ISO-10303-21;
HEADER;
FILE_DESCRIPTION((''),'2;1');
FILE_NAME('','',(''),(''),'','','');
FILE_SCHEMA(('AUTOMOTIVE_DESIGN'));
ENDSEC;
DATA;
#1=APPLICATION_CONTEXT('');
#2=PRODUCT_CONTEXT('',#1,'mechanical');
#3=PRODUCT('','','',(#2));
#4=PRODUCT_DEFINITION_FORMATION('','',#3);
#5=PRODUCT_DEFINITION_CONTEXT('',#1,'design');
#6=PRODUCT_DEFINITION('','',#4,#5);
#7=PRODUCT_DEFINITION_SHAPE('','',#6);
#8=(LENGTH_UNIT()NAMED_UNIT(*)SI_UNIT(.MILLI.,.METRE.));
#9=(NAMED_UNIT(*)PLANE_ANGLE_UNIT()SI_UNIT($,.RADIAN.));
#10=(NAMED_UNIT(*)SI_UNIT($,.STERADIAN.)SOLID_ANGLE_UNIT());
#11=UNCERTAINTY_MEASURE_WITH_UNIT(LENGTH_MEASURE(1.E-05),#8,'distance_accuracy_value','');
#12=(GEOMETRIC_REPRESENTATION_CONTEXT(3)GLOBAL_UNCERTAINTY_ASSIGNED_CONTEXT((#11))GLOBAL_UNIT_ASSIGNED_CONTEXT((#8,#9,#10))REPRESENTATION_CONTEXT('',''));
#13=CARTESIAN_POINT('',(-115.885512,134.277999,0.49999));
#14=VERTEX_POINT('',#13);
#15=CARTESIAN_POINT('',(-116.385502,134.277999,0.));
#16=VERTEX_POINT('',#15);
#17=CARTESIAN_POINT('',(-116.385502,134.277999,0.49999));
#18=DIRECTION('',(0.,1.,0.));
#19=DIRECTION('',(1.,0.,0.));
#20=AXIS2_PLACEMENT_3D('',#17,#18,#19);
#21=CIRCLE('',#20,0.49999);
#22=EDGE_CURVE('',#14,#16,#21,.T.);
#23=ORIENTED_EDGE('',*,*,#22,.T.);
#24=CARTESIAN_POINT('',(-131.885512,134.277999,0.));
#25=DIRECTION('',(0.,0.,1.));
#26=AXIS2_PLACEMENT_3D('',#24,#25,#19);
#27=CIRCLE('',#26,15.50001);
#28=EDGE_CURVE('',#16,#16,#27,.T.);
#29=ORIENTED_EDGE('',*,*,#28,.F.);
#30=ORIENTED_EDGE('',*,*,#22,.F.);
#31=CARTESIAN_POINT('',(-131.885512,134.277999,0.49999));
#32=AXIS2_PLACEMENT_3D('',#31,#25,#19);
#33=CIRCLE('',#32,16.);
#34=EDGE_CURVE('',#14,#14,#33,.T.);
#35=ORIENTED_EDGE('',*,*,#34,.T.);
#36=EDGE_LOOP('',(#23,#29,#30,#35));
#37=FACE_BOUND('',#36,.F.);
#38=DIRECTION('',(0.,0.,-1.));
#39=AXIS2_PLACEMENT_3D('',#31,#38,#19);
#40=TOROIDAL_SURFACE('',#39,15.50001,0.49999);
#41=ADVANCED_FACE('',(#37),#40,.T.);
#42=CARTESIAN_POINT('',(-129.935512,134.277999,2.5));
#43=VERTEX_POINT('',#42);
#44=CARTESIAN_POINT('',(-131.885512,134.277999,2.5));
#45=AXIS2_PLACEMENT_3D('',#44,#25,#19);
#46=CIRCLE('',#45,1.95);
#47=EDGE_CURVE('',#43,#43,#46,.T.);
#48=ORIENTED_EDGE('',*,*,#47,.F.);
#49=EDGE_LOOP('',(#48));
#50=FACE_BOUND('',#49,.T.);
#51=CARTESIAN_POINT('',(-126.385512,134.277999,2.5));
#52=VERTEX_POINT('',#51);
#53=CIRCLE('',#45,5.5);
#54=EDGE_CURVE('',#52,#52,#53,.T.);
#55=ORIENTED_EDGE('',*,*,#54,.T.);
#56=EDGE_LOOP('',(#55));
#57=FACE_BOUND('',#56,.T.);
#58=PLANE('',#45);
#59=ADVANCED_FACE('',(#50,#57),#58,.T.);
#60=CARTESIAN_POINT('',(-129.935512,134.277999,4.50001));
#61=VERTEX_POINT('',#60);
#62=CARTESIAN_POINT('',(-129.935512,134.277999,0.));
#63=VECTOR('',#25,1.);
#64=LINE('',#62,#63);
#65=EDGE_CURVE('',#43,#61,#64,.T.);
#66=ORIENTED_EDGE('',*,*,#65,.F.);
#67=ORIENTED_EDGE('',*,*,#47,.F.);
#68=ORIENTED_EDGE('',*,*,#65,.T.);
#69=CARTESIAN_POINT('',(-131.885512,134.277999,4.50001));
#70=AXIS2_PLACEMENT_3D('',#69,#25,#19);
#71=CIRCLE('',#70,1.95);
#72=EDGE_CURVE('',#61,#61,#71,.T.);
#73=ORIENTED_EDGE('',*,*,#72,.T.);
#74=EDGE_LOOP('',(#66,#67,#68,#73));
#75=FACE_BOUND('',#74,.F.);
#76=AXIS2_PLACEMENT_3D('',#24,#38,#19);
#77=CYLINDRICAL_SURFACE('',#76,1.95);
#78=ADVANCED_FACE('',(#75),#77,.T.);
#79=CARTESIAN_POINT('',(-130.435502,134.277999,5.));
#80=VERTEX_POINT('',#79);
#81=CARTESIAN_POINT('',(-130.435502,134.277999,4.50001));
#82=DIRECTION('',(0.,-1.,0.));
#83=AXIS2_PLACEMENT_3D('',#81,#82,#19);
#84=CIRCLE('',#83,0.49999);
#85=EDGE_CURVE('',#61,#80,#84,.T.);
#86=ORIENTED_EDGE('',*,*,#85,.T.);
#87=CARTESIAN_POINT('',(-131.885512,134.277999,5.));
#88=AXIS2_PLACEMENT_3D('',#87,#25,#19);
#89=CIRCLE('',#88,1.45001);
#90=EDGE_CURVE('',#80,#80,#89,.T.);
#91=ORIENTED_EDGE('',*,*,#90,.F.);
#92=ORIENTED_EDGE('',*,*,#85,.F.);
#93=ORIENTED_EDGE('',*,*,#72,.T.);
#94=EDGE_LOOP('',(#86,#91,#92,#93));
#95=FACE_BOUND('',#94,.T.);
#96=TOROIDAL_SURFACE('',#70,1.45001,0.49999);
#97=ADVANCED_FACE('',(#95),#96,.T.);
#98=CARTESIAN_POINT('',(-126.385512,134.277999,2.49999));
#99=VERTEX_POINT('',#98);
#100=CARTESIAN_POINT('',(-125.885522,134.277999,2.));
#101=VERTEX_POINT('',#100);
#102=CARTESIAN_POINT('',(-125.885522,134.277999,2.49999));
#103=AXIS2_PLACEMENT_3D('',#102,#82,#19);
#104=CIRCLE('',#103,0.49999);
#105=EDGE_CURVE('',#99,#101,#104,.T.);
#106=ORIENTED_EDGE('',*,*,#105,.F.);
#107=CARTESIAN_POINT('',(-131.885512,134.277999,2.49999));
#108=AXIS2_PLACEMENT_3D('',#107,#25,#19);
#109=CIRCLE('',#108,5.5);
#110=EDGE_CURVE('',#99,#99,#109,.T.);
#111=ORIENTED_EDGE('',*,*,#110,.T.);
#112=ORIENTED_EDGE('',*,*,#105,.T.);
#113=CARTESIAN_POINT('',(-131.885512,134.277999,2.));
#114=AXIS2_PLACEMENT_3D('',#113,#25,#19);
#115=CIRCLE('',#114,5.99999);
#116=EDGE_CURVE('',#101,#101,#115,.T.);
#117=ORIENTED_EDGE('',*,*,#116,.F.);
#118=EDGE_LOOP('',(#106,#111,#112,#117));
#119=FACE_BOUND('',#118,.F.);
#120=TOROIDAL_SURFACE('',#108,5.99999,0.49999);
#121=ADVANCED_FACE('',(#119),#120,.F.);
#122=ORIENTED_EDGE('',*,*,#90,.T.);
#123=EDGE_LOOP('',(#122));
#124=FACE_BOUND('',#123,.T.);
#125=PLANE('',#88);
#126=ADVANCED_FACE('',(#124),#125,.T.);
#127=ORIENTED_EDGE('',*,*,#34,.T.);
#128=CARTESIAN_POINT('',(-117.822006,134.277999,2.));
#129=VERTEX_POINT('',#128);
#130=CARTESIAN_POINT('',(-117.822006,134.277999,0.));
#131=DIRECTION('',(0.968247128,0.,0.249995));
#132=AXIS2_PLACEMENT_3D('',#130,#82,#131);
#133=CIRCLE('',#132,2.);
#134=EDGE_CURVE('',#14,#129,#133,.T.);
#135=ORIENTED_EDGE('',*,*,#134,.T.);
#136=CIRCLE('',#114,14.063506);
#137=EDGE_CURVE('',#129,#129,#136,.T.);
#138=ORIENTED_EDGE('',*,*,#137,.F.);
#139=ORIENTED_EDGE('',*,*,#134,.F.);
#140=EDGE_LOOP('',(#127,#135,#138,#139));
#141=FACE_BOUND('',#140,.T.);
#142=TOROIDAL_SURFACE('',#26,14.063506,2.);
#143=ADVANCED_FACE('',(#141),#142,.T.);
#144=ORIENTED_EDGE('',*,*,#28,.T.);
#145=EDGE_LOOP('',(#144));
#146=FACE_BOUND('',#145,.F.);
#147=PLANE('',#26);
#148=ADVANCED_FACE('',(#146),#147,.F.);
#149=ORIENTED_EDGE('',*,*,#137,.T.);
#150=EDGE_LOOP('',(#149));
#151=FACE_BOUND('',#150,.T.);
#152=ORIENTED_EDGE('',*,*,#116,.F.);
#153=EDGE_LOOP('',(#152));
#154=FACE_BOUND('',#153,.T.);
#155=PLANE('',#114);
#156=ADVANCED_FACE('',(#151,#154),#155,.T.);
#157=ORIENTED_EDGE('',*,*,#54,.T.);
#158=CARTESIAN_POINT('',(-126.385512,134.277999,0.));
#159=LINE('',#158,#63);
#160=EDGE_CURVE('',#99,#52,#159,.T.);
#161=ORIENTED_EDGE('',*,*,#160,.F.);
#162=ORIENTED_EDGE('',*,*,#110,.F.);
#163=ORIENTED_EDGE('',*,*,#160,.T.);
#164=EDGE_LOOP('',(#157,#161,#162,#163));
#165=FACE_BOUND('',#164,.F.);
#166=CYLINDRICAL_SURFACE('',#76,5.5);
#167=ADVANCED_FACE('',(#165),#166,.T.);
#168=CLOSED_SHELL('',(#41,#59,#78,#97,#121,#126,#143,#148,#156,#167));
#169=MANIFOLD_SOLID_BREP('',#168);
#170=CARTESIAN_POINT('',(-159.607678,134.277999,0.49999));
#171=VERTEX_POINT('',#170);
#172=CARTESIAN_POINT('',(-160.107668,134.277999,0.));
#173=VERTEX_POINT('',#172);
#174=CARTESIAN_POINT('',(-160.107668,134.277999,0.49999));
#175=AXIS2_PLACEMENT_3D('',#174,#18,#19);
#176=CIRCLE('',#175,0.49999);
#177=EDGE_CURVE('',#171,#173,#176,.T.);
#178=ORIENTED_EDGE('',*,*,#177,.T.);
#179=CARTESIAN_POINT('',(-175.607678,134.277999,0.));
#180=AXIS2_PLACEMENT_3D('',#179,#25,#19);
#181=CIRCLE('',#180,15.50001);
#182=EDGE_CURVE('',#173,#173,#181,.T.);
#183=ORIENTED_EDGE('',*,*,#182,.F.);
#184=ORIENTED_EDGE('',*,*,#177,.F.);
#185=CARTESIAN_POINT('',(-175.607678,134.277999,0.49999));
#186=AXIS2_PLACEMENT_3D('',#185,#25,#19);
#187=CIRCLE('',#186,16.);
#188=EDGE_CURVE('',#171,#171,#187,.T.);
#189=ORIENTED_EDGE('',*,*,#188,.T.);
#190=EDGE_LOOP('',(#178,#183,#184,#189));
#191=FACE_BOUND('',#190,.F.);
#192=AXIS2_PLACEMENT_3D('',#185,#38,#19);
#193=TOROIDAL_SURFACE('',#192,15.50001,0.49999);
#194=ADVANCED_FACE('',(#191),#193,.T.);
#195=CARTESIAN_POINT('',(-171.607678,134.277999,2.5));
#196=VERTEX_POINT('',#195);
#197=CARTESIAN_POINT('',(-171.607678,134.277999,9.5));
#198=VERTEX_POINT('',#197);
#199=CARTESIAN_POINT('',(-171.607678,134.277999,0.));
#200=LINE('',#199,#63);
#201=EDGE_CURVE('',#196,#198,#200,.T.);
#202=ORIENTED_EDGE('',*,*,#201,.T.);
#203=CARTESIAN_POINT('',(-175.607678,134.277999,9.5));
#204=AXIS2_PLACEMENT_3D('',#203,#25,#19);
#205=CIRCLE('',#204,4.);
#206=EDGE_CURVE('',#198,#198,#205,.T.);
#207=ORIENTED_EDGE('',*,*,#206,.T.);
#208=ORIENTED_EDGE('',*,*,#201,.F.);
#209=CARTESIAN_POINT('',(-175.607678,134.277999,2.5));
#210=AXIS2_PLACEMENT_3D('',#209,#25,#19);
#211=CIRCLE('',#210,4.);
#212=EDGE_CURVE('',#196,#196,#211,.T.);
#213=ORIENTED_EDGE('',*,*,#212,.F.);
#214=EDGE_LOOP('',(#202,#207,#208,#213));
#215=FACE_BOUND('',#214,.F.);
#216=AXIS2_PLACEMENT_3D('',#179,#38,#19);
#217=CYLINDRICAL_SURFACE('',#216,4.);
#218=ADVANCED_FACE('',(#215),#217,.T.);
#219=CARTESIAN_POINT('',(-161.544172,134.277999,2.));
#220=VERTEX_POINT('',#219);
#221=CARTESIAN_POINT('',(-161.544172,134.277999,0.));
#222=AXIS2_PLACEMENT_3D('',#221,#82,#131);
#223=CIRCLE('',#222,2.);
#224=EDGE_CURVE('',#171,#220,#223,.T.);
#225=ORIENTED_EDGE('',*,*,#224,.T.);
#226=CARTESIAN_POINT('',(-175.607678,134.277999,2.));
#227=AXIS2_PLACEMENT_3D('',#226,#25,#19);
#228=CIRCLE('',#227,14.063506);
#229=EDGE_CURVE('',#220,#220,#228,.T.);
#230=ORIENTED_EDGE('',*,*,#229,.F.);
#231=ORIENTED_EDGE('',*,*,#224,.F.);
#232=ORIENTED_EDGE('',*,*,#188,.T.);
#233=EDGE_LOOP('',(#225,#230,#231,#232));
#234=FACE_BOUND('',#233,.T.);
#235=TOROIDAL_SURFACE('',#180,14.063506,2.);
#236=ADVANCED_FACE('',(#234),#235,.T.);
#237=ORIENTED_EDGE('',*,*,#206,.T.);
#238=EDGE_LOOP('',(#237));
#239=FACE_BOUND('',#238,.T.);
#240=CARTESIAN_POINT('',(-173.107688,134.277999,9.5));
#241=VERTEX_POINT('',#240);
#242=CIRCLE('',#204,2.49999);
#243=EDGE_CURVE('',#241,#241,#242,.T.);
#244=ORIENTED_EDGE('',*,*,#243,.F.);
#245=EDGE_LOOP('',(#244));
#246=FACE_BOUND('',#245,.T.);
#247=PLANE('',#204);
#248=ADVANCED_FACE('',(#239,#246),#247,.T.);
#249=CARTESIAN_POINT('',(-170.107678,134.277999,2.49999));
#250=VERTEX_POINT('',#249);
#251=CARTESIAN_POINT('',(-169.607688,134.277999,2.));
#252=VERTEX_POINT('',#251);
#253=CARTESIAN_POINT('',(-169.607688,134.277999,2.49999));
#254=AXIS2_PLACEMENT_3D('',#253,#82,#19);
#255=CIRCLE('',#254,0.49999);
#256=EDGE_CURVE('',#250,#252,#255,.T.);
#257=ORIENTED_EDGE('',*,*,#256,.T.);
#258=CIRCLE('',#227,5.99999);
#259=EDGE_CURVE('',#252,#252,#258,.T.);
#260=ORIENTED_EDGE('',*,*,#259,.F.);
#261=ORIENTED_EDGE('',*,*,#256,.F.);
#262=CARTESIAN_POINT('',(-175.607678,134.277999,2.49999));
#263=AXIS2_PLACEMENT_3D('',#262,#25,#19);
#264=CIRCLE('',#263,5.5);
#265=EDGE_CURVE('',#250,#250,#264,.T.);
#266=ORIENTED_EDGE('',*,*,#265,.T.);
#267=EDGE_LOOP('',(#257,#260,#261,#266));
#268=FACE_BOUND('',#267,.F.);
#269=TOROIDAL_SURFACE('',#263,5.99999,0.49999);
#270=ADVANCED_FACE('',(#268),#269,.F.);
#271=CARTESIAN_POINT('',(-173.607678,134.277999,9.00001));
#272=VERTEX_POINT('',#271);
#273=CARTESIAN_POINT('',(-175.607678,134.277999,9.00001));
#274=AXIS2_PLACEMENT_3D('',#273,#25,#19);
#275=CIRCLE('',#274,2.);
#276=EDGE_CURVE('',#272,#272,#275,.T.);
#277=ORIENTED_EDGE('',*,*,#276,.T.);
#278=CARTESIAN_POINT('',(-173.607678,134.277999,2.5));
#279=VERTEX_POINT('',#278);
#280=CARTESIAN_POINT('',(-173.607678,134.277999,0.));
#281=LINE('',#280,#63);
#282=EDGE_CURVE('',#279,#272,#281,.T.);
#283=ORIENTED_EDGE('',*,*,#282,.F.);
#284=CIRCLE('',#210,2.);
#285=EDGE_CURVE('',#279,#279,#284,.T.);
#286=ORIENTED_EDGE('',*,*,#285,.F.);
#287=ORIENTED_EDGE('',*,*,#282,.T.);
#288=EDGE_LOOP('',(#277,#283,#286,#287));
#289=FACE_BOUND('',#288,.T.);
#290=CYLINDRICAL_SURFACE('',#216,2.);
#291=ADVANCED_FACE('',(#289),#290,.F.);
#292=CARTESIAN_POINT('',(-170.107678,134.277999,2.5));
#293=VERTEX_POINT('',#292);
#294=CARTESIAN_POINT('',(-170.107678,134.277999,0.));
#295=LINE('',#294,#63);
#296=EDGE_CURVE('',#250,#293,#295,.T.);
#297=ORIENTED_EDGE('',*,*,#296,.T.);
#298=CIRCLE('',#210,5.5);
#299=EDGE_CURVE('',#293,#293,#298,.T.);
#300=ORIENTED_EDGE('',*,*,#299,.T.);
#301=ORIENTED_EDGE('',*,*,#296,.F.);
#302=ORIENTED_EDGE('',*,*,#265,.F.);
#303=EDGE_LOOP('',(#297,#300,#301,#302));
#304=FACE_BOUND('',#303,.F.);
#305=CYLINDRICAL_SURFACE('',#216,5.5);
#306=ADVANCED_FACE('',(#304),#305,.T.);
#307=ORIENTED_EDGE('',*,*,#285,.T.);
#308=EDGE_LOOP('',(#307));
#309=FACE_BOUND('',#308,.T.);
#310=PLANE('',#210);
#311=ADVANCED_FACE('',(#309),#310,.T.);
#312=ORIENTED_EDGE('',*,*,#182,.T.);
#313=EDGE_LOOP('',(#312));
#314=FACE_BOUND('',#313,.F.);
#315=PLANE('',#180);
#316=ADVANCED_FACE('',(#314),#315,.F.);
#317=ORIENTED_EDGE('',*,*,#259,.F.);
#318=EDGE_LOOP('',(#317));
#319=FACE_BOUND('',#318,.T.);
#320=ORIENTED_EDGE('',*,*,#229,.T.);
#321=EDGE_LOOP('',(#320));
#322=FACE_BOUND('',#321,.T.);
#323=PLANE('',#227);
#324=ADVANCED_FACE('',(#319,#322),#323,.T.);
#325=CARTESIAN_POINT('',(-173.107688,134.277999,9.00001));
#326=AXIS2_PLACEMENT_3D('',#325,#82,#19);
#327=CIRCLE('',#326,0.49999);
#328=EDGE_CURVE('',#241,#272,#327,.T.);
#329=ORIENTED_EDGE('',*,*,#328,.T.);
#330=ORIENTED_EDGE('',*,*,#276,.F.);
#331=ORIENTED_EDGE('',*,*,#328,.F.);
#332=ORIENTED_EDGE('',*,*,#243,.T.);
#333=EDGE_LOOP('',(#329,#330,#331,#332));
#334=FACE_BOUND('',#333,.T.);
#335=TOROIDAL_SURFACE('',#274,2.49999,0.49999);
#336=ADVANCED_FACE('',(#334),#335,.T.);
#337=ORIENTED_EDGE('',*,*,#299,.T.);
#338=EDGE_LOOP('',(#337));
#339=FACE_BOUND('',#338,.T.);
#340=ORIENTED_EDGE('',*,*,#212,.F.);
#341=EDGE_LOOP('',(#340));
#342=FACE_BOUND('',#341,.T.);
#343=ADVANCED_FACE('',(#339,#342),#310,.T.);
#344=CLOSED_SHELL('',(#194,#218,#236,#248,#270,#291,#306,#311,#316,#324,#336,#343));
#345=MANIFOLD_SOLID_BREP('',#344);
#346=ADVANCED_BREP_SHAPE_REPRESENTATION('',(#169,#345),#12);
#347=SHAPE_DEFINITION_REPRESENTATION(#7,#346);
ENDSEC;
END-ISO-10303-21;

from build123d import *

# Parameters (mm, degrees)
F0_R     = 16
F0_R_2   = 5.5
F1_DEPTH = 2
F0_R_3   = 4
F2_DEPTH = 2.5
F0_R_4   = 1.95
F0_R_5   = 2
F3_DEPTH = 9.5
F4_DEPTH = 5
F5_R     = 0.49999
F5_2_R   = 0.49999


# Not quite as in the source:
# - a fillet or chamfer that OpenCascade refuses, or shapes differently, is made with other operations: its cross-section is extruded or revolved along the edge and cut away or added
# - a fillet or chamfer is up to 0.001 mm smaller than in the source, because OpenCascade refuses the exact size


with BuildPart() as f1:
    # F0 (on Top) → F1 (new body)
    with BuildSketch(Plane.XY):
        with Locations((-175.6076780854, 134.277998743)):
            Circle(F0_R)
        with Locations((-175.6076780854, 134.277998743)):
            Circle(F0_R_2, mode=Mode.SUBTRACT)
    extrude(amount=F1_DEPTH)

    # F0 (on Top) → F2 (join)
    with BuildSketch(Plane.XY):
        with Locations((-175.6076780854, 134.277998743)):
            Circle(F0_R_2)
        with Locations((-175.6076780854, 134.277998743)):
            Circle(F0_R_3, mode=Mode.SUBTRACT)
    extrude(amount=F2_DEPTH)



with BuildPart() as f1b:
    # F0 (on Top) → F1, piece 2 (new body)
    with BuildSketch(Plane.XY):
        with Locations((-131.8855119995, 134.277998743)):
            Circle(F0_R)
        with Locations((-131.8855119995, 134.277998743)):
            Circle(F0_R_2, mode=Mode.SUBTRACT)
    extrude(amount=F1_DEPTH)

    # F0 (on Top) → F2, piece 2 (join)
    with BuildSketch(Plane.XY):
        with Locations((-131.8855119995, 134.277998743)):
            Circle(F0_R_2)
        with Locations((-131.8855119995, 134.277998743)):
            Circle(F0_R_4, mode=Mode.SUBTRACT)
    extrude(amount=F2_DEPTH)

    # F0 (on Top) → F4 (join)
    with BuildSketch(Plane.XY):
        with Locations((-131.8855119995, 134.277998743)):
            Circle(F0_R_4)
    extrude(amount=F4_DEPTH)

    # F5#2 (radius 0.5 in the source; OpenCascade refuses exactly that, so slightly less here)
    f5_2_edges = [f1b.edges().sort_by_distance(p)[0] for p in [
        (-133.835512, 134.277999, 5),
        (-137.385512, 134.277999, 2),
        (-147.885512, 134.277999, 0),
    ]]
    fillet(f5_2_edges, radius=F5_2_R)

    # F6#2: fillet of radius 2 on 1 edges, made by hand

    # F6_2_s1 → F6_2_t2 (revolve, cut)
    with BuildSketch(Plane.XZ.offset(-134.277998743)):
        with BuildLine():
            ThreePointArc((-115.8855119995, 0.49999), (-116.5972573007, 1.5811356678), (-117.8220062546, 2))
            Line((-117.8220062546, 2), (-117.8220062546, 2.04))
            Line((-117.8220062546, 2.04), (-115.8855119995, 2.04))
            Line((-115.8855119995, 2.04), (-115.8455119995, 2))
            ThreePointArc((-115.8455119995, 2), (-115.8455119995, 1.249995), (-115.8467821144, 0.5099898))
            Line((-115.8467821144, 0.5099898), (-115.8855119995, 0.49999))
        make_face()
    revolve(axis=Axis((-131.8855119995, 134.277998743, 2), (0, 0, 1)), mode=Mode.SUBTRACT)


with BuildPart() as f2:
    # F0 (on Top) → F2, piece 3 (new body)
    with BuildSketch(Plane.XY):
        with Locations((-175.6076780854, 134.277998743)):
            Circle(F0_R_5)
    extrude(amount=F2_DEPTH)


with BuildPart() as f1_1:
    add(f1.part)

    add(f2.part)  # F3 merges F2
    # F0 (on Top) → F3 (join)
    with BuildSketch(Plane.XY):
        with Locations((-175.6076780854, 134.277998743)):
            Circle(F0_R_3)
        with Locations((-175.6076780854, 134.277998743)):
            Circle(F0_R_5, mode=Mode.SUBTRACT)
    extrude(amount=F3_DEPTH)

    # F5 (radius 0.5 in the source; OpenCascade refuses exactly that, so slightly less here)
    f5_edges = [f1_1.edges().sort_by_distance(p)[0] for p in [
        (-177.607678, 134.277999, 9.5),
        (-181.107678, 134.277999, 2),
        (-191.607678, 134.277999, 0),
    ]]
    fillet(f5_edges, radius=F5_R)

    # F6: fillet of radius 2 on 1 edges, made by hand

    # F6_s1 → F6_t2 (revolve, cut)
    with BuildSketch(Plane.XZ.offset(-134.277998743)):
        with BuildLine():
            ThreePointArc((-159.6076780854, 0.49999), (-160.3194233866, 1.5811356678), (-161.5441723405, 2))
            Line((-161.5441723405, 2), (-161.5441723405, 2.04))
            Line((-161.5441723405, 2.04), (-159.6076780854, 2.04))
            Line((-159.6076780854, 2.04), (-159.5676780854, 2))
            ThreePointArc((-159.5676780854, 2), (-159.5676780854, 1.249995), (-159.5689482003, 0.5099898))
            Line((-159.5689482003, 0.5099898), (-159.6076780854, 0.49999))
        make_face()
    revolve(axis=Axis((-175.6076780854, 134.277998743, 2), (0, 0, 1)), mode=Mode.SUBTRACT)


solid = Compound([f1b.part, f1_1.part])
